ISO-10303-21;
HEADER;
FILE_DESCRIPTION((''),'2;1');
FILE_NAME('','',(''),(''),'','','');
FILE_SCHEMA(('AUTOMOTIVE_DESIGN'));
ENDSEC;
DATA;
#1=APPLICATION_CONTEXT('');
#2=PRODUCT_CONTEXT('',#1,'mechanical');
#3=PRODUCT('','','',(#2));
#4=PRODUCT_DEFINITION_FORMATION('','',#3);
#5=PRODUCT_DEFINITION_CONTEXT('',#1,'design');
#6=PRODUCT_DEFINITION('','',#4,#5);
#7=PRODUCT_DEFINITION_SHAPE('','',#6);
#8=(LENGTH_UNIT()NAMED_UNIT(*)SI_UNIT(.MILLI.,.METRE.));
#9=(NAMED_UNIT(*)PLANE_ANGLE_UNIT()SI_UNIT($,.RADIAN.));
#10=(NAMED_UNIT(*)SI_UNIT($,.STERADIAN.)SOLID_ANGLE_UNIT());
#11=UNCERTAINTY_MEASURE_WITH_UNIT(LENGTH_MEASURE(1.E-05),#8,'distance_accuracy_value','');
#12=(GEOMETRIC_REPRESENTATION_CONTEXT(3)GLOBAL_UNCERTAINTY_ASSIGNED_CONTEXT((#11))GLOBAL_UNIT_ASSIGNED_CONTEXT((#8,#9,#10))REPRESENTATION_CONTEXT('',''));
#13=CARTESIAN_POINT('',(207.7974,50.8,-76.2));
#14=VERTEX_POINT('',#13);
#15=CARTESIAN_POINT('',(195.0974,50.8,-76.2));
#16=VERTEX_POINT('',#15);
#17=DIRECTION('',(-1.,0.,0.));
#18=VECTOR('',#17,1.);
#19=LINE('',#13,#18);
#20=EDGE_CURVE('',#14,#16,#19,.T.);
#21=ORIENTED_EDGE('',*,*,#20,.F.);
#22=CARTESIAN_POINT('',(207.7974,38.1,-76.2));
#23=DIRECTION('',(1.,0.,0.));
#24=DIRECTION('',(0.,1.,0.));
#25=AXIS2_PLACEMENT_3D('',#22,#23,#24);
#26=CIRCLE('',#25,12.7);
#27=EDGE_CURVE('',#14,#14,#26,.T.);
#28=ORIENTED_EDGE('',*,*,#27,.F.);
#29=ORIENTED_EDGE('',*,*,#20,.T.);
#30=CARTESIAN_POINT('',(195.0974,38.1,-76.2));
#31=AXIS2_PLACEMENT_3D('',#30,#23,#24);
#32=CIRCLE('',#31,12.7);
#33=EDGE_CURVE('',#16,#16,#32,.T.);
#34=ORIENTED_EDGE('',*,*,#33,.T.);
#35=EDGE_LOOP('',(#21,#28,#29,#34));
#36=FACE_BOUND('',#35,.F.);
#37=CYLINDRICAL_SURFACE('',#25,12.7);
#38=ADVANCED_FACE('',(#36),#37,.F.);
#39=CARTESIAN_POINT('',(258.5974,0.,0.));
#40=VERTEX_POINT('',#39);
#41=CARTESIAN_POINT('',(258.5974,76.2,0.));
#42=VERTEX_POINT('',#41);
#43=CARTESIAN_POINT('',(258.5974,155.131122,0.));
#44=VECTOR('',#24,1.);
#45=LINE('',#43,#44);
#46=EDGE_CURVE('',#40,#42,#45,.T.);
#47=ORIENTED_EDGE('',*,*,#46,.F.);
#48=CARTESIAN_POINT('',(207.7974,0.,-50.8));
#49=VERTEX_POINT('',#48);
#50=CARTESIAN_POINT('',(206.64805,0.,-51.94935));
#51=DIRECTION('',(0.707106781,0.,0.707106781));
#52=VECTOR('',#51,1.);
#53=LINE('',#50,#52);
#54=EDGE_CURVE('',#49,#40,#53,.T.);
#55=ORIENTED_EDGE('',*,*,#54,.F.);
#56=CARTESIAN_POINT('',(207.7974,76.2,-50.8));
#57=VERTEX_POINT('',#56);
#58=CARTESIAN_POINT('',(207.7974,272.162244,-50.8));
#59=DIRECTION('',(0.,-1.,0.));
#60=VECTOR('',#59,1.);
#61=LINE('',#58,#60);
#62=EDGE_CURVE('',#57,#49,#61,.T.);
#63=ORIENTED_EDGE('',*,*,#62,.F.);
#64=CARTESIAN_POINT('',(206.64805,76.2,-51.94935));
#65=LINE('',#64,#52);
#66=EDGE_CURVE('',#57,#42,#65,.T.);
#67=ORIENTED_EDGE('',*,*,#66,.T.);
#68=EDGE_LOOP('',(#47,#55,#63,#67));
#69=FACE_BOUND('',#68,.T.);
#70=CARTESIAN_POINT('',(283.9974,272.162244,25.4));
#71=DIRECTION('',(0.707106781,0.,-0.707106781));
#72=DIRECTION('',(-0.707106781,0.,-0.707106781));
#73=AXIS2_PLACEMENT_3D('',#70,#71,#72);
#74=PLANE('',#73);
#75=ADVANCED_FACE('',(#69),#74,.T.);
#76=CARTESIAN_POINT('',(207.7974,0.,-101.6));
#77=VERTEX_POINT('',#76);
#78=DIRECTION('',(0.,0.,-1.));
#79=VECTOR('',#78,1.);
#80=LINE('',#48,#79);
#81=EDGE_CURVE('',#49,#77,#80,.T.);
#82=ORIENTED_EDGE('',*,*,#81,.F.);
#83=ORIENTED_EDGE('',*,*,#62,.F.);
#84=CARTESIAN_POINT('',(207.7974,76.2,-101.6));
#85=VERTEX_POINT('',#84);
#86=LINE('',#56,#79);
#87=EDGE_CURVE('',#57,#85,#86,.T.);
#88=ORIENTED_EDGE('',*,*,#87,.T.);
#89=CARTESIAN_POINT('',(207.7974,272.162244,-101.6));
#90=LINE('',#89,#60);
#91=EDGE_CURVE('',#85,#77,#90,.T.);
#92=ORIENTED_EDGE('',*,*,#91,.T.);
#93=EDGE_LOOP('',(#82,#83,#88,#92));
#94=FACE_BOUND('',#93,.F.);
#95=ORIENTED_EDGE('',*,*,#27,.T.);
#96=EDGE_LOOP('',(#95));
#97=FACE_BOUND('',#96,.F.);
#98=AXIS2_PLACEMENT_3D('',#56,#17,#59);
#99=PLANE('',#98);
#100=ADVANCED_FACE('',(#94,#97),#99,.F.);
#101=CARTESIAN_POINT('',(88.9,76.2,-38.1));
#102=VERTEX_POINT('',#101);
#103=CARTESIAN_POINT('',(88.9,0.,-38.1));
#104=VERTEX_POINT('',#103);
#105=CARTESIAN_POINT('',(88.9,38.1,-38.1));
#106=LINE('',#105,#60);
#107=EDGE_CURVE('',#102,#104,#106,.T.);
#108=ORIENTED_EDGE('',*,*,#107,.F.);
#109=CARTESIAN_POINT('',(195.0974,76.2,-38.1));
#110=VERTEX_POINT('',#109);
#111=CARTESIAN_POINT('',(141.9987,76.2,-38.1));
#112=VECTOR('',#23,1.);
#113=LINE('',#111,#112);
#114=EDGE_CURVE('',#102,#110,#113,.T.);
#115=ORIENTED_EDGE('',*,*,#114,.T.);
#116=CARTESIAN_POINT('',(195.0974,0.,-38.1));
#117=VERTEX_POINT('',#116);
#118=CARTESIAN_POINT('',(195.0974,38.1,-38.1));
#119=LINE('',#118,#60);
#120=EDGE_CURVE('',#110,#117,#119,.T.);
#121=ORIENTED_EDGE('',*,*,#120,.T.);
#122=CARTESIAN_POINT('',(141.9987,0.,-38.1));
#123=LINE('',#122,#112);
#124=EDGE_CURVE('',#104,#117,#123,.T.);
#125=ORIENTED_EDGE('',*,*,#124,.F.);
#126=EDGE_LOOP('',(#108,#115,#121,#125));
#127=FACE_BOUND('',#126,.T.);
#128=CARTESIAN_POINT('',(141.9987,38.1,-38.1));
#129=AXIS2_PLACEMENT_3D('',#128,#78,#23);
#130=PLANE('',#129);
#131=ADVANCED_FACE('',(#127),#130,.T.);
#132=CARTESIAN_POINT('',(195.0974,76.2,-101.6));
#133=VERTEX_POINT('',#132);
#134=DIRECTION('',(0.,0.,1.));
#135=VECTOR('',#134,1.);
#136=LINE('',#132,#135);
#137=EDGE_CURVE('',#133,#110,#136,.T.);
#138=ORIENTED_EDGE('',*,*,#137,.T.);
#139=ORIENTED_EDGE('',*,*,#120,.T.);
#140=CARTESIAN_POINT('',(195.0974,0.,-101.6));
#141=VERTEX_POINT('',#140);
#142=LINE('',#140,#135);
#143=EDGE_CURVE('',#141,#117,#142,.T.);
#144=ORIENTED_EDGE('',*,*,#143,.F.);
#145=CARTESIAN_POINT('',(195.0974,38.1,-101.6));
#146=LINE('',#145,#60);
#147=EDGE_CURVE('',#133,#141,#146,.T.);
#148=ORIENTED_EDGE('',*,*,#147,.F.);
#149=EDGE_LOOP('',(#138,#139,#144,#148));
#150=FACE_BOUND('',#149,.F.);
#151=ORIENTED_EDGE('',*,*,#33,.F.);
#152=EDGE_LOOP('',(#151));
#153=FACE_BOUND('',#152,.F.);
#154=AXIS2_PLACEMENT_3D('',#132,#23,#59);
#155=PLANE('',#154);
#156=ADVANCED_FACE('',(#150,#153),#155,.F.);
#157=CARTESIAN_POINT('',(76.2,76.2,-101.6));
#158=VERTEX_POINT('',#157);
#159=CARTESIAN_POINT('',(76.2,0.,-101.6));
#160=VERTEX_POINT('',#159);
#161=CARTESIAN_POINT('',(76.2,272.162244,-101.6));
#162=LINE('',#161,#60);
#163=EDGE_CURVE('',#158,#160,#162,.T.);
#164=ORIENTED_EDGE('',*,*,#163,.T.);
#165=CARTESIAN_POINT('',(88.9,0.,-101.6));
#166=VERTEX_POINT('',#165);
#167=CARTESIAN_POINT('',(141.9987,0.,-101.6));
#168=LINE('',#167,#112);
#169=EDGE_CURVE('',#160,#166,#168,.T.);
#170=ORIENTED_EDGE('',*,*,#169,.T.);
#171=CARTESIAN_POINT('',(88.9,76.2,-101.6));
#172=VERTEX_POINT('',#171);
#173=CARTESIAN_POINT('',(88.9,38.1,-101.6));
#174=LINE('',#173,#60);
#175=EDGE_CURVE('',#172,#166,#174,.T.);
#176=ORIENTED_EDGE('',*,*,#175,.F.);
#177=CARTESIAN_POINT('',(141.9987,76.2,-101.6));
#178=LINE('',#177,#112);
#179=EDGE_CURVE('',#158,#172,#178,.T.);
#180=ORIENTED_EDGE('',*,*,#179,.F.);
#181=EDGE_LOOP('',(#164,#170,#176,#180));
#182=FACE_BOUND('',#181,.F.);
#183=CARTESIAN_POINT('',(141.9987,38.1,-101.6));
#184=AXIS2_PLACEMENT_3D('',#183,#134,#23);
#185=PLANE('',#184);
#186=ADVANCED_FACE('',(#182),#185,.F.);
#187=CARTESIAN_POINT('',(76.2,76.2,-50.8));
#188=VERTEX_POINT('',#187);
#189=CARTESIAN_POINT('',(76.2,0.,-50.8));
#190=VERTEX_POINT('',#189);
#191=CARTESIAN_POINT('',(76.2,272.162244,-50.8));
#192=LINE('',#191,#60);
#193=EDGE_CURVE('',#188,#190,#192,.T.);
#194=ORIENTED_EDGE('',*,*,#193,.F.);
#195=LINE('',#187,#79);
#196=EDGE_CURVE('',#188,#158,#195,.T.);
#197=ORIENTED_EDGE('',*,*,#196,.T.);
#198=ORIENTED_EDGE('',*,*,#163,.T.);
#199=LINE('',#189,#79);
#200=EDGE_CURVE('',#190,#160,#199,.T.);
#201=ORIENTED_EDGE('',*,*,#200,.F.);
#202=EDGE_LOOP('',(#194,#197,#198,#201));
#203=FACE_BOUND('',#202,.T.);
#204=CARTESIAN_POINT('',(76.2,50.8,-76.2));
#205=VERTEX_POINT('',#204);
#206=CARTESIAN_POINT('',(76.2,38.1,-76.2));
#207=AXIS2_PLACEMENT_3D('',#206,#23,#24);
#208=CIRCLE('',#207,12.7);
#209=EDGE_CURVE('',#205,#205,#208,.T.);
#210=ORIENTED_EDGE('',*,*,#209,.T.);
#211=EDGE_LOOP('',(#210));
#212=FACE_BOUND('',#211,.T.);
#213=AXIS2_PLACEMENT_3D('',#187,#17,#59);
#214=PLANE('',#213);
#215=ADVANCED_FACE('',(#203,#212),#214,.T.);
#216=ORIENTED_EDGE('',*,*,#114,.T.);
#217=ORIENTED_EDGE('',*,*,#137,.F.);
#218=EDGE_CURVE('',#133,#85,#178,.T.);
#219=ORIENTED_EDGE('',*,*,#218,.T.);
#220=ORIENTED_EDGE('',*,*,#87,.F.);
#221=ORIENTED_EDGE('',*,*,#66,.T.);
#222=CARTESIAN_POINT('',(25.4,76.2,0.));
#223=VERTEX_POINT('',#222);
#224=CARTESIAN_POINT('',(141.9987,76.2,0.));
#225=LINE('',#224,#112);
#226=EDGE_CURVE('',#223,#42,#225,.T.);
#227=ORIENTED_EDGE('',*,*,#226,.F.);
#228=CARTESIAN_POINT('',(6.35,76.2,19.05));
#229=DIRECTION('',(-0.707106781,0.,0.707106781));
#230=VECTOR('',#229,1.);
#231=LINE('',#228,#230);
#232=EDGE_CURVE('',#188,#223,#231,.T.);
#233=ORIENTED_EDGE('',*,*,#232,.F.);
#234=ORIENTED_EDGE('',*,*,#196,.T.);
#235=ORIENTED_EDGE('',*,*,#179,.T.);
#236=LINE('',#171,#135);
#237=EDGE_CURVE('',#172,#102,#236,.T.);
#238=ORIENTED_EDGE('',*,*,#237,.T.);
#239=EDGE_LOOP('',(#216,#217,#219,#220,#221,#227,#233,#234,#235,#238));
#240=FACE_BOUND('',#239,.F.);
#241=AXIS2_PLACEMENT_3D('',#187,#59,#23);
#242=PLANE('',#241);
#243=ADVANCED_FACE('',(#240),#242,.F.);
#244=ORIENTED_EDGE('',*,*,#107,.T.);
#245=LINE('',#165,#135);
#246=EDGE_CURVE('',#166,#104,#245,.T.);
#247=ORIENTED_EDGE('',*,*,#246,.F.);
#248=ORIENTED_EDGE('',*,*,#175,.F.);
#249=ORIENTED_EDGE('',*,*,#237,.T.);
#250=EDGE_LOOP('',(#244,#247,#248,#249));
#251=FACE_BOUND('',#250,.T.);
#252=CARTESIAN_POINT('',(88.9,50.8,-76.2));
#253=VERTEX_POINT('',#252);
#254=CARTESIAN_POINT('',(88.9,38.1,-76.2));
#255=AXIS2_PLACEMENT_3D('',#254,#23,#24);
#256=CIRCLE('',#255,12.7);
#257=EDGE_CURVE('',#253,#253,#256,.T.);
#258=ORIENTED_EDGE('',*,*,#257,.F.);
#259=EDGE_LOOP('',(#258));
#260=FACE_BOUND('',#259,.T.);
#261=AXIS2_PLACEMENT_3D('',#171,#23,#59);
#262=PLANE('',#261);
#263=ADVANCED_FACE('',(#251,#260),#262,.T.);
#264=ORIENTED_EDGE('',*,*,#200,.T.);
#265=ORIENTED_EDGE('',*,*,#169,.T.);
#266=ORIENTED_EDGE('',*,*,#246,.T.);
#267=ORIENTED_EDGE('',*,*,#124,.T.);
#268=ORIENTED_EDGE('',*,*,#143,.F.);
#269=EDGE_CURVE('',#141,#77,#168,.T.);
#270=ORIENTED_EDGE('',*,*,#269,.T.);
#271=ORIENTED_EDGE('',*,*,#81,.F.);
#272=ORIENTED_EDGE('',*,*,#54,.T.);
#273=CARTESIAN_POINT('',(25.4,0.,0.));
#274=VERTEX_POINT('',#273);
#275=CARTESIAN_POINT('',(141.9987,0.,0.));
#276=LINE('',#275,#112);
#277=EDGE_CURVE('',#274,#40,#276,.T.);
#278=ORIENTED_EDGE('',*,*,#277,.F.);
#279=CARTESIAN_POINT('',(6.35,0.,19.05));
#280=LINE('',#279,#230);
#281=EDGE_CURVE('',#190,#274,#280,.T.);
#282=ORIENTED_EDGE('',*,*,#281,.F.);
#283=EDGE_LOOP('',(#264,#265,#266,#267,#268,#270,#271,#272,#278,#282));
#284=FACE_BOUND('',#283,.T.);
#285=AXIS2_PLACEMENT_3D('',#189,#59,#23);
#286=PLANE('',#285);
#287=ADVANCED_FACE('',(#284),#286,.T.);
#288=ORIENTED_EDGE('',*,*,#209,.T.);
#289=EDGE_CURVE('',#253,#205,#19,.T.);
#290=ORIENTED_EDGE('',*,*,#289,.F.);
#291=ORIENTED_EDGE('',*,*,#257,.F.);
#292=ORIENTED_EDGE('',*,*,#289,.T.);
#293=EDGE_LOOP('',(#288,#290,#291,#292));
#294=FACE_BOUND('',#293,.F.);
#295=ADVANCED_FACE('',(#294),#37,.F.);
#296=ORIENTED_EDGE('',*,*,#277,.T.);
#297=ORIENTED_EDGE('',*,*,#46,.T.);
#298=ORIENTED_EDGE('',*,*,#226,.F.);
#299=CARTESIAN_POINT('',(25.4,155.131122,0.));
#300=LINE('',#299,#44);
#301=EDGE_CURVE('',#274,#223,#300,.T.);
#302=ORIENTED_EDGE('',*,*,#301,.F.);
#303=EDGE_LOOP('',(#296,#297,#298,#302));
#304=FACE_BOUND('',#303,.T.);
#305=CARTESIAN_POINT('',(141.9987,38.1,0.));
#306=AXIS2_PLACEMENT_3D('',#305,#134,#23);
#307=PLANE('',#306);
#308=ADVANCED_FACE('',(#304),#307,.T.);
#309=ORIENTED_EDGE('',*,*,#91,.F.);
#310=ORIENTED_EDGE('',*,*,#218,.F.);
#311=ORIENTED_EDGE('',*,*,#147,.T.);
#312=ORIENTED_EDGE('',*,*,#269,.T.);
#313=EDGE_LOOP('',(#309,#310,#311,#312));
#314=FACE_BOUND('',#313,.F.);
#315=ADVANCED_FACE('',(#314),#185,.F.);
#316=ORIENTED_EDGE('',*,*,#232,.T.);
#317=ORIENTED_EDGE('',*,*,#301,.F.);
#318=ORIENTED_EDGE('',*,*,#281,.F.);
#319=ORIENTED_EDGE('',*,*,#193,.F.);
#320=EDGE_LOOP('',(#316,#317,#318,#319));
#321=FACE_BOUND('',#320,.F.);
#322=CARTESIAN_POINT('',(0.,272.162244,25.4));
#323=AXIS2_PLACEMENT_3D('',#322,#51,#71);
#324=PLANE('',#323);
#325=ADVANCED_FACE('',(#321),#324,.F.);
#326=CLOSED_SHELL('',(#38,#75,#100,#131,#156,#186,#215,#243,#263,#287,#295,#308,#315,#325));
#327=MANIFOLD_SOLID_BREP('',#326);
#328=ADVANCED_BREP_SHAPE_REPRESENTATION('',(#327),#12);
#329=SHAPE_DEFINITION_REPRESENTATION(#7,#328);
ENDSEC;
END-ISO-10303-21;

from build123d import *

# Parameters (mm, degrees)
F0_W        = 283.9974
F0_H        = 76.2
F1_DEPTH    = 50.8
F2_T1_DEPTH = 468.124487366
F3_DEPTH    = 50.8
F4_W        = 106.1974
F4_H        = 76.2
F5_DEPTH    = 63.5
F6_R        = 12.7
F7_DEPTH    = 182.3984


# Not quite as in the source:
# - a fillet or chamfer that OpenCascade refuses, or shapes differently, is made with other operations: its cross-section is extruded or revolved along the edge and cut away or added


with BuildPart() as f1:
    # F0 (on Top) → F1 (new body)
    with BuildSketch(Plane.XY):
        with Locations((141.9987, 38.1)):
            Rectangle(F0_W, F0_H)
    extrude(amount=-F1_DEPTH)

    # F2: chamfer of 76.2 on 2 edges, made by hand

    # F2_s2 → F2_t1 (cut)
    with BuildSketch(Plane.XZ.offset(-272.162243683)):
        Polygon((0, 25.4), (76.2, -50.8), (0, -50.8), align=None)
        Polygon((283.9974, 25.4), (207.7974, -50.8), (283.9974, -50.8), align=None)
    extrude(amount=F2_T1_DEPTH, mode=Mode.SUBTRACT)

    # F3 (add): a face of the model
    f3_faces = [f1.faces().sort_by_distance(p)[0] for p in [
        (141.9987, 38.1, -50.8),
    ]]
    extrude(f3_faces, amount=F3_DEPTH)

    # F4 (on face) → F5 (cut)
    with BuildSketch(Plane(origin=(0, 0, -101.6), x_dir=(1, 0, 0), z_dir=(0, 0, -1))):
        with Locations((141.9987, -38.1)):
            Rectangle(F4_W, F4_H)
    extrude(amount=-F5_DEPTH, mode=Mode.SUBTRACT)

    # F6 (on face) → F7 (cut, through all)
    with BuildSketch(Plane.YZ.offset(207.7974)):
        with Locations((38.1, -76.2)):
            Circle(F6_R)
    extrude(amount=-F7_DEPTH, mode=Mode.SUBTRACT)


solid = f1.part
